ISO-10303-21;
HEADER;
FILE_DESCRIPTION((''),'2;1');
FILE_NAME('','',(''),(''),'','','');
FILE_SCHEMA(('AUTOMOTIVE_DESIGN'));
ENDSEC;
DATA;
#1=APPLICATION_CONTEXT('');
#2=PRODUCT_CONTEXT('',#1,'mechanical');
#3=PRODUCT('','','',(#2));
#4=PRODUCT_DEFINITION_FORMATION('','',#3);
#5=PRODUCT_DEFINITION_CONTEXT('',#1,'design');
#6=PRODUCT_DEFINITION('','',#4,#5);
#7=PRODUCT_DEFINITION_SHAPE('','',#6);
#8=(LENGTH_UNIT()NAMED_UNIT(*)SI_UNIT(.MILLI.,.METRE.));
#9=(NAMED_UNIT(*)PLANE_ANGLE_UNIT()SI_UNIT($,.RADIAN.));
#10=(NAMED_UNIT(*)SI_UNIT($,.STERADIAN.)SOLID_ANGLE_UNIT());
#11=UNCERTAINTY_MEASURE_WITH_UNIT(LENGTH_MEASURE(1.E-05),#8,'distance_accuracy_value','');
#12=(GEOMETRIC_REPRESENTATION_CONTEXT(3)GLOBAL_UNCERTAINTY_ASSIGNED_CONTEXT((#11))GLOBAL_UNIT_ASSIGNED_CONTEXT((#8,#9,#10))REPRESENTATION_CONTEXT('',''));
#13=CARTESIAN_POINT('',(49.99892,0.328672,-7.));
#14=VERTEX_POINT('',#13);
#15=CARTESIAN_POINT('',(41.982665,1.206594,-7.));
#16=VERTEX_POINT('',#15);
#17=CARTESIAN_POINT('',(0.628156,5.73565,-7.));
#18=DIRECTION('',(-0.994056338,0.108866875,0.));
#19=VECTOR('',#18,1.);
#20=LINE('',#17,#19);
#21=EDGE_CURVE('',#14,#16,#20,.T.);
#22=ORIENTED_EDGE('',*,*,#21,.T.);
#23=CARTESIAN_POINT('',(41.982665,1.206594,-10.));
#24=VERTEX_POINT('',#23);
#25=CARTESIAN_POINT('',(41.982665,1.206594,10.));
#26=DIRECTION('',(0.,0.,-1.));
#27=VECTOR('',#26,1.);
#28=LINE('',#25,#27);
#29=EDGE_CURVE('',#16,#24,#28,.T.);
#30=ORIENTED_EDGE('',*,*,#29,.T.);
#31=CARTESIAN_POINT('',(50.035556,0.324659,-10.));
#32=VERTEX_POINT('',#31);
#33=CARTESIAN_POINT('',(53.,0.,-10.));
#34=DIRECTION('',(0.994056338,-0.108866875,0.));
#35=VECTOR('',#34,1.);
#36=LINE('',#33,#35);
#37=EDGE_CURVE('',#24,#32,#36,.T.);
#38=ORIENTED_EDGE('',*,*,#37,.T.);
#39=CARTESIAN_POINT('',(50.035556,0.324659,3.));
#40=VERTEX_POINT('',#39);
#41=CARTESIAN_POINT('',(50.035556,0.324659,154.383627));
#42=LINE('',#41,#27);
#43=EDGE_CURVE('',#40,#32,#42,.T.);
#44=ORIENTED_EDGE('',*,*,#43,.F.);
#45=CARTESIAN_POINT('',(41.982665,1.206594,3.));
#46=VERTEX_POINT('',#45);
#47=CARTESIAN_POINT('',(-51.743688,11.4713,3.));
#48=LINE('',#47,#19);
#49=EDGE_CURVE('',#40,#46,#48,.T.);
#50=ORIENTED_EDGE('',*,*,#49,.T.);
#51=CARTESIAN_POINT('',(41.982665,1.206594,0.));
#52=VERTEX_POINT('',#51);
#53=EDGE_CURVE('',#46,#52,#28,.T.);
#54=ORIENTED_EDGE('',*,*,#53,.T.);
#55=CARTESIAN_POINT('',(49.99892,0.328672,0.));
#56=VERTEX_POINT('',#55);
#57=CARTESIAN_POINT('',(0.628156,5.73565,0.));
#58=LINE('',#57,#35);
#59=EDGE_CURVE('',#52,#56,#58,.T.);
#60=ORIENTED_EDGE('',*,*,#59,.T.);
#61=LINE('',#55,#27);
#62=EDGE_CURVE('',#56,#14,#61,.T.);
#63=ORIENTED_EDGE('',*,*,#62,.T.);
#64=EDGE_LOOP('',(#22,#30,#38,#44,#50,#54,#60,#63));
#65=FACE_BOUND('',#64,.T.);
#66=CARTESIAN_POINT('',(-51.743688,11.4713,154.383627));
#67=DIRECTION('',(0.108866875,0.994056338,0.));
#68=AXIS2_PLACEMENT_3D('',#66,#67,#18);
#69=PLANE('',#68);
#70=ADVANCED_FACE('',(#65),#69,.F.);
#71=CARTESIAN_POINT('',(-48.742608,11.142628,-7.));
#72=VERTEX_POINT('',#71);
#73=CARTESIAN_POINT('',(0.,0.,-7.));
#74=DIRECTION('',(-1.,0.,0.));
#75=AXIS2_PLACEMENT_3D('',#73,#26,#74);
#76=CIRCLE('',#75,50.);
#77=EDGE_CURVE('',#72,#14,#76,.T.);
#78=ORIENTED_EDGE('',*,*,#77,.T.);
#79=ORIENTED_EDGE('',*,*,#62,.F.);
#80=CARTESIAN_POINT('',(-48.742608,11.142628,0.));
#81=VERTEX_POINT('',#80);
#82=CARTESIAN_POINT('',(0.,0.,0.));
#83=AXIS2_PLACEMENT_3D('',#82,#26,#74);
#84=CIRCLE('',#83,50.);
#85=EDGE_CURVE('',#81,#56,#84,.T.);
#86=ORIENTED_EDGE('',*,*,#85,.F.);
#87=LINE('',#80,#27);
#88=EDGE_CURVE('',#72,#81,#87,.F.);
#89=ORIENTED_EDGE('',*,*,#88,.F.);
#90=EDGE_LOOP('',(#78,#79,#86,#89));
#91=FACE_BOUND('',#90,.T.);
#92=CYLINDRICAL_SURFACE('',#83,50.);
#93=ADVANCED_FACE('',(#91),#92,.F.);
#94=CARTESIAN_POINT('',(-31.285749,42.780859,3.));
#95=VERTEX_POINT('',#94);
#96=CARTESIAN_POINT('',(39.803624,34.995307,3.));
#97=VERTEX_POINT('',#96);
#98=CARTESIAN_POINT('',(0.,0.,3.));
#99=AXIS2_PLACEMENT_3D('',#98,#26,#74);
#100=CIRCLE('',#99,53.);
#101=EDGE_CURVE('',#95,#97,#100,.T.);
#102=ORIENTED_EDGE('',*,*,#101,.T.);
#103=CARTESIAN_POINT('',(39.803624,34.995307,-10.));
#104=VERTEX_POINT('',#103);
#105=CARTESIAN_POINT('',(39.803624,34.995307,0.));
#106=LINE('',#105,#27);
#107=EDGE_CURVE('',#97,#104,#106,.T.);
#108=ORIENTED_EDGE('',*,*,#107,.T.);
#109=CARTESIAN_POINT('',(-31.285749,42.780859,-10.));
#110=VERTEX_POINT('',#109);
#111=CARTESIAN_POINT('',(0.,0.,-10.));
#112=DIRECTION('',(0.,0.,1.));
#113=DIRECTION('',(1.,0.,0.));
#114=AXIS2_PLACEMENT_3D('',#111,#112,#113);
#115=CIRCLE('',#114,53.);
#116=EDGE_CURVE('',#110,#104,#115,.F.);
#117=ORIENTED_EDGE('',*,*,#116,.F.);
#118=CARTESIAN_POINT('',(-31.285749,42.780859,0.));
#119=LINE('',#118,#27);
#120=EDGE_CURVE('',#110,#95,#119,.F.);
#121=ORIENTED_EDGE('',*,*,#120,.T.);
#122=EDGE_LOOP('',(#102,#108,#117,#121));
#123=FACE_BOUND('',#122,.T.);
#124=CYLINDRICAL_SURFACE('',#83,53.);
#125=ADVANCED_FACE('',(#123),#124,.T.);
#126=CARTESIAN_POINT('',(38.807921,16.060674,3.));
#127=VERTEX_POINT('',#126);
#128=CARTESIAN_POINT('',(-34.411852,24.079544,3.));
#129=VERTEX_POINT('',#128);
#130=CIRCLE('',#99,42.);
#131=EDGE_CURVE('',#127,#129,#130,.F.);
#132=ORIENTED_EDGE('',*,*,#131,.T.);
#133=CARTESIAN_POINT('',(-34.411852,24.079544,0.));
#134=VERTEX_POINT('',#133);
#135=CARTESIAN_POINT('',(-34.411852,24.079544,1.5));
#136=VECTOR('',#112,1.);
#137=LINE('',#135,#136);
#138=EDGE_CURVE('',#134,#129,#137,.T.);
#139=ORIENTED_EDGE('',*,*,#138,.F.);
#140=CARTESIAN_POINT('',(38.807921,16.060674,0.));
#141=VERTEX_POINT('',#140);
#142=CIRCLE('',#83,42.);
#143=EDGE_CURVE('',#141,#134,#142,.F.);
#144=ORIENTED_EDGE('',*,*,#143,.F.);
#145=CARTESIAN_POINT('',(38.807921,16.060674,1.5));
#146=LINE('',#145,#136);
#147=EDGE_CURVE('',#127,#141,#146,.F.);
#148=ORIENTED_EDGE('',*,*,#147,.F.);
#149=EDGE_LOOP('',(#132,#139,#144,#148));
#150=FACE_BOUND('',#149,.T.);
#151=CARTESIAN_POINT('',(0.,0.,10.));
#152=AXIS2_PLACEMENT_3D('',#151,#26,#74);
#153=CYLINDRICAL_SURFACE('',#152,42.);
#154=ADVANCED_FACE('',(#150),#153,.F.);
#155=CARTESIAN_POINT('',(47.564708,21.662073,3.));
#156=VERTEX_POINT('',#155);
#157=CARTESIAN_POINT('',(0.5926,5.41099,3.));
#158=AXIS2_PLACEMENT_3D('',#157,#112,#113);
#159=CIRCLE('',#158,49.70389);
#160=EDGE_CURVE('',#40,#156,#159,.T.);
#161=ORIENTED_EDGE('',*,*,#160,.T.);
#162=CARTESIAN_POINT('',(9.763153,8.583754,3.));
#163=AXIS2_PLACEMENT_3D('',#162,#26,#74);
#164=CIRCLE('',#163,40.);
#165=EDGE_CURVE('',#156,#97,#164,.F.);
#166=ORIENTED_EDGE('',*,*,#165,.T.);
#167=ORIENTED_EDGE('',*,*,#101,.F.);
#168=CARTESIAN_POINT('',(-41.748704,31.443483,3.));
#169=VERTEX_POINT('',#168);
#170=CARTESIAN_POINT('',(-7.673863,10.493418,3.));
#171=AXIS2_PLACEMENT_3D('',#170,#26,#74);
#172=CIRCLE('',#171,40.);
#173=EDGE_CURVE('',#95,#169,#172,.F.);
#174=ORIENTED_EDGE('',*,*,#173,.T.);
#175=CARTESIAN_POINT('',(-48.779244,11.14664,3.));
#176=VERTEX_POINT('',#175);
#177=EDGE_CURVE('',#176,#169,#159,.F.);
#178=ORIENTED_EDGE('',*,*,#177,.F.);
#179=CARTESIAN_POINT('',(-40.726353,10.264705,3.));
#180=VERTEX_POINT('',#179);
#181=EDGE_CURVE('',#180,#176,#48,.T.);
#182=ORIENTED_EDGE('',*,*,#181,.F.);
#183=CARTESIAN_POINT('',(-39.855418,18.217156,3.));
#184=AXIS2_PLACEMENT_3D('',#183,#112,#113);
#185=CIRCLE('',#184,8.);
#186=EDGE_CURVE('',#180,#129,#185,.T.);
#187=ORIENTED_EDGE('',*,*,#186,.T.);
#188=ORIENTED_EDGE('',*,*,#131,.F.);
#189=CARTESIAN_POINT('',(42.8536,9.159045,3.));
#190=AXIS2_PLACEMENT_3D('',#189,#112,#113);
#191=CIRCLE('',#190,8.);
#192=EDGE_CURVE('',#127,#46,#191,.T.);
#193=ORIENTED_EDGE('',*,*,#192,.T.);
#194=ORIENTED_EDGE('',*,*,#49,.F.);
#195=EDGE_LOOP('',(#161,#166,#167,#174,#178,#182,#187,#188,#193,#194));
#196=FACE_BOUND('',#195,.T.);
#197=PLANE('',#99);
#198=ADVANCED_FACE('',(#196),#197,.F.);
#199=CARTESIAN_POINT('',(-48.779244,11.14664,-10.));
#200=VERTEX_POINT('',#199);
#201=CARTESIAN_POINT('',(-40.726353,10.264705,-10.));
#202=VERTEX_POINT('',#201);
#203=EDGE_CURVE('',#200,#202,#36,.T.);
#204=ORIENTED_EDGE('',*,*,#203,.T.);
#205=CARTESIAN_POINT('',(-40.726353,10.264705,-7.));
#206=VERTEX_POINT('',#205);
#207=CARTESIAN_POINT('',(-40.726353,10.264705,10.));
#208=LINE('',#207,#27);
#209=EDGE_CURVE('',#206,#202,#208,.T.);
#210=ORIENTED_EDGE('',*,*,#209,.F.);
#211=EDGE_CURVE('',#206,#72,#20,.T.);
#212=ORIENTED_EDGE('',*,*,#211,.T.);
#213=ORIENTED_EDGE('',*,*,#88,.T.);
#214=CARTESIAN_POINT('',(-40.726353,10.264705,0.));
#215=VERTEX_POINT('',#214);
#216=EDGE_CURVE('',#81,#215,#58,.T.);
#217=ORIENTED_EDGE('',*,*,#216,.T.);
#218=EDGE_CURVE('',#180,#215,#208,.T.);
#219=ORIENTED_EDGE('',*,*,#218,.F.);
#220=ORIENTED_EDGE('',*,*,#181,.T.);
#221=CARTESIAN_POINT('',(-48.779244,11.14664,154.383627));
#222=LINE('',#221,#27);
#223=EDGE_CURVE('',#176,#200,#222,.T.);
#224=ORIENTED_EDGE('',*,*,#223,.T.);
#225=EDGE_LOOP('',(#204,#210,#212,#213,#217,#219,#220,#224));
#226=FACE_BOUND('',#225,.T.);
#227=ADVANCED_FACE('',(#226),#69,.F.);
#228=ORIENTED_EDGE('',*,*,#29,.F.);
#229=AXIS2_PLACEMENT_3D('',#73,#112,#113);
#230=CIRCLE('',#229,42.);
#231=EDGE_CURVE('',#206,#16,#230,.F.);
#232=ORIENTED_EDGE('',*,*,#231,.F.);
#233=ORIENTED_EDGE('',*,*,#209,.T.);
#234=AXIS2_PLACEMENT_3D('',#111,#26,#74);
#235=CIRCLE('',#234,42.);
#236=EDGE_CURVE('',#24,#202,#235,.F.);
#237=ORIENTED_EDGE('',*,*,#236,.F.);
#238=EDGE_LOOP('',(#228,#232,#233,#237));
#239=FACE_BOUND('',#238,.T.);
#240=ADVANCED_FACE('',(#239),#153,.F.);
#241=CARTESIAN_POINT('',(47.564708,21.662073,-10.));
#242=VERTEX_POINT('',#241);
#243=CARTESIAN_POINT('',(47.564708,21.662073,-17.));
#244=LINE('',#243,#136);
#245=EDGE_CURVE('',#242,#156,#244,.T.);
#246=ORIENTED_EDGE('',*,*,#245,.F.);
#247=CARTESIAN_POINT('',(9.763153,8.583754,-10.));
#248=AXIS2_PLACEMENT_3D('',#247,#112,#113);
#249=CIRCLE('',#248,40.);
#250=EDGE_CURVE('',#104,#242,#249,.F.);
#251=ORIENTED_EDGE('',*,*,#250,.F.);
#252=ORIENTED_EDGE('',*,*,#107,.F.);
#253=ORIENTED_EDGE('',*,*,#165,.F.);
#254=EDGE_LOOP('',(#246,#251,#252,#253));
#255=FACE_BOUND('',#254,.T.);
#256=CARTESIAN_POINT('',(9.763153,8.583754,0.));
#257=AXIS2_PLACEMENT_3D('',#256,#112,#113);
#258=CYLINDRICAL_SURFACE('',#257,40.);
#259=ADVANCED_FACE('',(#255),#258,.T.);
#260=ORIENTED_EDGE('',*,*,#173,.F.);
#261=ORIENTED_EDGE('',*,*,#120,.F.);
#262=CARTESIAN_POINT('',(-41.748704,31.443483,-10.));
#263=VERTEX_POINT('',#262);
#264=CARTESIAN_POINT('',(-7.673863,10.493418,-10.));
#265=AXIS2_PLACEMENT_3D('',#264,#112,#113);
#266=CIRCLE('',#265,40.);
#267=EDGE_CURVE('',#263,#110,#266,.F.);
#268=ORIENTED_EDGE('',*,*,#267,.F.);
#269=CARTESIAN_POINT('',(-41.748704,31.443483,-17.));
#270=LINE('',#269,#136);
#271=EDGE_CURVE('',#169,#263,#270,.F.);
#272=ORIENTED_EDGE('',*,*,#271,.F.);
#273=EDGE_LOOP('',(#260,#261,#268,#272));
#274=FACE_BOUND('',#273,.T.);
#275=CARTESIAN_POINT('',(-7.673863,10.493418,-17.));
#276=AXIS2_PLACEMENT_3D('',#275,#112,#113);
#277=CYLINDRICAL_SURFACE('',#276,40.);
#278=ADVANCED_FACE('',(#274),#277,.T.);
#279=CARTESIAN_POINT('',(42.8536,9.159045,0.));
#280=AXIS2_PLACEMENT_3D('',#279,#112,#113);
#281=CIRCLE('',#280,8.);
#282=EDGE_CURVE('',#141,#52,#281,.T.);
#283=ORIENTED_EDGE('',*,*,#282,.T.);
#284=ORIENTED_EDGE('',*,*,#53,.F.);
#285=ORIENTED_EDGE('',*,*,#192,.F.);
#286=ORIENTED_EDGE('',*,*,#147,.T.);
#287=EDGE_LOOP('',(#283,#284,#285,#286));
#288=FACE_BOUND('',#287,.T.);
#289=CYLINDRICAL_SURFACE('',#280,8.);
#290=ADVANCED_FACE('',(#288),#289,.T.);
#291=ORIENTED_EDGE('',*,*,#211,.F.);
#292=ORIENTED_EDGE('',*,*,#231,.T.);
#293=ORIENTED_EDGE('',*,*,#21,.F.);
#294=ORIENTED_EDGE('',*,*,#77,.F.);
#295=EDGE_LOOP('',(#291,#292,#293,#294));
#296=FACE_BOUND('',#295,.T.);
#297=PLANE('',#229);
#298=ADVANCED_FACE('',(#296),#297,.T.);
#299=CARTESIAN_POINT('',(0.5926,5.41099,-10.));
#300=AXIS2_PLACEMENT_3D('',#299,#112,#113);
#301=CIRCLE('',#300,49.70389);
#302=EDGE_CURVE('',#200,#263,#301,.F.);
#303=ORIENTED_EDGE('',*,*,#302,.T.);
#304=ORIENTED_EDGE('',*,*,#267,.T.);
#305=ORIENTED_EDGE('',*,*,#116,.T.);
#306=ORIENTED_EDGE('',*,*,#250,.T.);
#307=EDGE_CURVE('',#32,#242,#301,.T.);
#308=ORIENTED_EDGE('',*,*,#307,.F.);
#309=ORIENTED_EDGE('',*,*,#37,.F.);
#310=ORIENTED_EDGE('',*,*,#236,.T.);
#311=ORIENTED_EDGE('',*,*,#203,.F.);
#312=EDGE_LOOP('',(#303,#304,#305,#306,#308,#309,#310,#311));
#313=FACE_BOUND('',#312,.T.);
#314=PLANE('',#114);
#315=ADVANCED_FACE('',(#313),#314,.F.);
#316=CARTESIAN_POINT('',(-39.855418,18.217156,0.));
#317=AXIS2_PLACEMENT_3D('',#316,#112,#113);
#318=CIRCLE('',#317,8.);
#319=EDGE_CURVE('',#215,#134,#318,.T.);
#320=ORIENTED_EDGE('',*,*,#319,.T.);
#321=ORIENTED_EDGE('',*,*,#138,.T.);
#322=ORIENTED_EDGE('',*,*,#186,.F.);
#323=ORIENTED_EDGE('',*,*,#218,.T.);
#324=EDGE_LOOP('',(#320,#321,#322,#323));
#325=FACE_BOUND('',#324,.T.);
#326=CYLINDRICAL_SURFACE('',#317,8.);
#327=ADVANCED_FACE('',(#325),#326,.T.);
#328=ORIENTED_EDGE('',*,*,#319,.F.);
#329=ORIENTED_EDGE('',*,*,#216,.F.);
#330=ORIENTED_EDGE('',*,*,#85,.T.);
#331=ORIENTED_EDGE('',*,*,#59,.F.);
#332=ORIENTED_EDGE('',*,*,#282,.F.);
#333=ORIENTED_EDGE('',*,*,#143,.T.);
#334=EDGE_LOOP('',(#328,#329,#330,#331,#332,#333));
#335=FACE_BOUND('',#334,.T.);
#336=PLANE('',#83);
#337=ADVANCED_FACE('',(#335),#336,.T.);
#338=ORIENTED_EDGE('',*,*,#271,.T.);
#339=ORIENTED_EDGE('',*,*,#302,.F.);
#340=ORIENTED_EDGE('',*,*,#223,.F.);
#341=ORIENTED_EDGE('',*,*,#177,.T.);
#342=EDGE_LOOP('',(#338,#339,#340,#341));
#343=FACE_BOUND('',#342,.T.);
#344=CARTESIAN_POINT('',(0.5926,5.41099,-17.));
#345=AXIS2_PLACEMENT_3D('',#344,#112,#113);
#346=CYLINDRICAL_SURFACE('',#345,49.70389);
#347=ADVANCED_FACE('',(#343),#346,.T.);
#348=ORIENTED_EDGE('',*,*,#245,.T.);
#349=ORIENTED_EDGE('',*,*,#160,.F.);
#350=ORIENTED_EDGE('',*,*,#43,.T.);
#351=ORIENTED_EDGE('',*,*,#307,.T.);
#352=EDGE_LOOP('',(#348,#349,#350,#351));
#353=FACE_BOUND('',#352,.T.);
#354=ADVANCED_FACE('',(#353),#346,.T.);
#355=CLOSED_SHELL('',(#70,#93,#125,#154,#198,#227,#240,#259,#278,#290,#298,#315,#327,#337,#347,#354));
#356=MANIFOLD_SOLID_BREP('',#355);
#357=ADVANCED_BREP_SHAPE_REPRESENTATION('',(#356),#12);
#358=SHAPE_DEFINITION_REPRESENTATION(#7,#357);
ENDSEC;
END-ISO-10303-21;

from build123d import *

# Parameters (mm, degrees)
SKETCH1_W                     = 50
SKETCH1_H                     = 7
REVOLVE5_ANGLE                = 167.5
SHELL2_T                      = 3
CUT_EXTRUDE3_DEPTH            = 77.072333999
CUT_EXTRUDE3_DEPTH_BACK       = 10
CUT_EXTRUDE4_DEPTH            = 77.072333999
CUT_EXTRUDE4_DEPTH_BACK       = 10
CUT_EXTRUDE_THIN1_DEPTH       = 77.072333999
CUT_EXTRUDE_THIN1_DEPTH_BACK  = 20
CUT_EXTRUDE_THIN2_DEPTH       = 77.072333999
CUT_EXTRUDE_THIN2_DEPTH_BACK  = 20
CUT_EXTRUDE_THIN3_DEPTH       = 76.000787866
CUT_EXTRUDE_THIN3_DEPTH_BACK  = 20
SKETCH18_R                    = 8
BOSS_EXTRUDE3_DEPTH           = 3
CUT_EXTRUDE_THIN11_DEPTH      = 76.000787866
CUT_EXTRUDE_THIN11_DEPTH_BACK = 20
CUT_EXTRUDE_THIN12_DEPTH      = 76.000787866
CUT_EXTRUDE_THIN12_DEPTH_BACK = 20
FILLET2_R                     = 40


with BuildPart() as part:
    # Sketch1 → Revolve5 (revolve)
    with BuildSketch(Plane(origin=(0, 0, 0), x_dir=(1, 0, 0), z_dir=(0, 1, 0))):
        with Locations((25, 3.5)):
            Rectangle(SKETCH1_W, SKETCH1_H)
    revolve(axis=Axis((0, 0, 0), (0, 0, 1)), revolution_arc=REVOLVE5_ANGLE)

    # Shell2
    shell2_openings = [part.faces().sort_by_distance(p)[0] for p in [
        (25, 0, -3.5),
        (-24.407400178, 5.410990348, -3.5),
    ]]
    offset(amount=SHELL2_T, openings=shell2_openings, kind=Kind.INTERSECTION)

    # Sketch11 → Cut-Extrude3 (cut, two sides: drawn at the far end of the back side and taken through both)
    with BuildSketch(Plane.XY.offset(3).offset(-CUT_EXTRUDE3_DEPTH_BACK)):
        Polygon((-295.067343662, 38.119573796), (-51.743688377, 11.471299539), (53, 0), (296.323655284, -26.648274258), (243.027106769, -513.295584826), (-348.363892177, -448.527736772), align=None)
    extrude(amount=CUT_EXTRUDE3_DEPTH + CUT_EXTRUDE3_DEPTH_BACK, mode=Mode.SUBTRACT)

    # Sketch12 → Cut-Extrude4 (cut, two sides: drawn at the far end of the back side and taken through both)
    with BuildSketch(Plane(origin=(0, 0, -10), x_dir=(-1, 0, 0), z_dir=(0, 0, -1)).offset(-CUT_EXTRUDE4_DEPTH_BACK)):
        Polygon((-296.323655284, -26.648274258), (-53, 0), (51.743688377, 11.471299539), (295.067343662, 38.119573796), (348.363892177, -448.527736772), (-243.027106769, -513.295584826), align=None)
    extrude(amount=CUT_EXTRUDE4_DEPTH + CUT_EXTRUDE4_DEPTH_BACK, mode=Mode.SUBTRACT)

    # Sketch13 → Cut-Extrude-Thin1 (cut, two sides: drawn at the far end of the back side and taken through both)
    with BuildSketch(Plane(origin=(0, 0, -10), x_dir=(-1, 0, 0), z_dir=(0, 0, -1)).offset(-CUT_EXTRUDE_THIN1_DEPTH_BACK)):
        Polygon((48.779244367, 11.146640118), (47.419699991, 23.560551191), (57.360263374, 24.64921994), (58.719807749, 12.235308866), align=None)
    extrude(amount=CUT_EXTRUDE_THIN1_DEPTH + CUT_EXTRUDE_THIN1_DEPTH_BACK, mode=Mode.SUBTRACT)

    # Sketch14 → Cut-Extrude-Thin2 (cut, two sides: drawn at the far end of the back side and taken through both)
    with BuildSketch(Plane(origin=(0, 0, -10), x_dir=(-1, 0, 0), z_dir=(0, 0, -1)).offset(-CUT_EXTRUDE_THIN2_DEPTH_BACK)):
        Polygon((-50.035555989, 0.324659421), (-51.39409796, 12.729417605), (-81.215788107, 9.46341136), (-79.857246136, -2.941346825), align=None)
    extrude(amount=CUT_EXTRUDE_THIN2_DEPTH + CUT_EXTRUDE_THIN2_DEPTH_BACK, mode=Mode.SUBTRACT)

    # Sketch15 → Cut-Extrude-Thin3 (cut, two sides: drawn at the far end of the back side and taken through both)
    with BuildSketch(Plane(origin=(0, 0, -10), x_dir=(-1, 0, 0), z_dir=(0, 0, -1)).offset(-CUT_EXTRUDE_THIN3_DEPTH_BACK)):
        with BuildLine():
            ThreePointArc((-41.982664634, 1.20659446), (-4.572408744, 41.750366205), (40.726353012, 10.264705079))
            Line((40.726353012, 10.264705079), (11.636100861, 2.93277288))
            ThreePointArc((11.636100861, 2.93277288), (-1.306402498, 11.928676059), (-11.995047038, 0.344741274))
            Line((-11.995047038, 0.344741274), (-41.982664634, 1.20659446))
        make_face()
    extrude(amount=CUT_EXTRUDE_THIN3_DEPTH + CUT_EXTRUDE_THIN3_DEPTH_BACK, mode=Mode.SUBTRACT)


with BuildPart() as body_2:
    # of the pieces the cut leaves, the one that is kept (cut_extrude_thin3_keep)
    add(part.part.solids().sort_by_distance((49.998919737, 0.328671743, 0))[0])

    # Sketch18 → Boss-Extrude3 (add)
    with BuildSketch(Plane.XY.offset(3)):
        with Locations((-39.855418013, 18.217155785)):
            Circle(SKETCH18_R)
        with Locations((42.853599633, 9.159045166)):
            Circle(SKETCH18_R)
    extrude(amount=-BOSS_EXTRUDE3_DEPTH)

    # Sketch26 → Cut-Extrude-Thin11 (cut, two sides: drawn at the far end of the back side and taken through both)
    with BuildSketch(Plane.XY.offset(3).offset(-CUT_EXTRUDE_THIN11_DEPTH_BACK)):
        with BuildLine():
            ThreePointArc((-48.779244367, 11.146640118), (-44.869380897, 25.502903795), (-36.885486711, 38.058650397))
            Line((-36.885486711, 38.058650397), (-51.966031339, 51.195513559))
            ThreePointArc((-51.966031339, 51.195513559), (-63.162508763, 33.587548061), (-68.645634797, 13.454568038))
            Line((-68.645634797, 13.454568038), (-48.779244367, 11.146640118))
        make_face()
    extrude(amount=CUT_EXTRUDE_THIN11_DEPTH + CUT_EXTRUDE_THIN11_DEPTH_BACK, mode=Mode.SUBTRACT)

    # Sketch27 → Cut-Extrude-Thin12 (cut, two sides: drawn at the far end of the back side and taken through both)
    with BuildSketch(Plane.XY.offset(3).offset(-CUT_EXTRUDE_THIN12_DEPTH_BACK)):
        with BuildLine():
            ThreePointArc((50.035555989, 0.324659421), (49.325636064, 15.186871666), (44.248552996, 29.173027916))
            Line((44.248552996, 29.173027916), (61.814966092, 38.73446771))
            ThreePointArc((61.814966092, 38.73446771), (68.93498104, 19.120520049), (69.93056067, -1.721993641))
            Line((69.93056067, -1.721993641), (50.035555989, 0.324659421))
        make_face()
    extrude(amount=CUT_EXTRUDE_THIN12_DEPTH + CUT_EXTRUDE_THIN12_DEPTH_BACK, mode=Mode.SUBTRACT)

    # Fillet2
    # the kernel refuses this fillet: 40 mm, written as the material it takes off along each edge
    with BuildSketch(Plane(origin=(-36.885486711, 38.058650397, -30.526100609), x_dir=(-0.5923211564074143, -0.8057019595807023, 0), z_dir=(0, 0, 1)), Plane(origin=(44.248552996, 29.173027916, 23.526100609), x_dir=(0.4038949588524026, -0.9148053684875357, 0), z_dir=(0, 0, -1))) as fillet2_piece_1:
        with BuildLine():
            CenterArc((4.906698725, 39.863332675), FILLET2_R, 252.499995648, 22.237662415)
            ThreePointArc((-7.121536153, 1.714655559), (-3.59042601, 0.734148493), (0, 0))
            ThreePointArc((0, 0), (4.105220122, -0.169822442), (8.210440244, 0))
        make_face()
    extrude(amount=54.052201219, mode=Mode.SUBTRACT)


solid = body_2.part
